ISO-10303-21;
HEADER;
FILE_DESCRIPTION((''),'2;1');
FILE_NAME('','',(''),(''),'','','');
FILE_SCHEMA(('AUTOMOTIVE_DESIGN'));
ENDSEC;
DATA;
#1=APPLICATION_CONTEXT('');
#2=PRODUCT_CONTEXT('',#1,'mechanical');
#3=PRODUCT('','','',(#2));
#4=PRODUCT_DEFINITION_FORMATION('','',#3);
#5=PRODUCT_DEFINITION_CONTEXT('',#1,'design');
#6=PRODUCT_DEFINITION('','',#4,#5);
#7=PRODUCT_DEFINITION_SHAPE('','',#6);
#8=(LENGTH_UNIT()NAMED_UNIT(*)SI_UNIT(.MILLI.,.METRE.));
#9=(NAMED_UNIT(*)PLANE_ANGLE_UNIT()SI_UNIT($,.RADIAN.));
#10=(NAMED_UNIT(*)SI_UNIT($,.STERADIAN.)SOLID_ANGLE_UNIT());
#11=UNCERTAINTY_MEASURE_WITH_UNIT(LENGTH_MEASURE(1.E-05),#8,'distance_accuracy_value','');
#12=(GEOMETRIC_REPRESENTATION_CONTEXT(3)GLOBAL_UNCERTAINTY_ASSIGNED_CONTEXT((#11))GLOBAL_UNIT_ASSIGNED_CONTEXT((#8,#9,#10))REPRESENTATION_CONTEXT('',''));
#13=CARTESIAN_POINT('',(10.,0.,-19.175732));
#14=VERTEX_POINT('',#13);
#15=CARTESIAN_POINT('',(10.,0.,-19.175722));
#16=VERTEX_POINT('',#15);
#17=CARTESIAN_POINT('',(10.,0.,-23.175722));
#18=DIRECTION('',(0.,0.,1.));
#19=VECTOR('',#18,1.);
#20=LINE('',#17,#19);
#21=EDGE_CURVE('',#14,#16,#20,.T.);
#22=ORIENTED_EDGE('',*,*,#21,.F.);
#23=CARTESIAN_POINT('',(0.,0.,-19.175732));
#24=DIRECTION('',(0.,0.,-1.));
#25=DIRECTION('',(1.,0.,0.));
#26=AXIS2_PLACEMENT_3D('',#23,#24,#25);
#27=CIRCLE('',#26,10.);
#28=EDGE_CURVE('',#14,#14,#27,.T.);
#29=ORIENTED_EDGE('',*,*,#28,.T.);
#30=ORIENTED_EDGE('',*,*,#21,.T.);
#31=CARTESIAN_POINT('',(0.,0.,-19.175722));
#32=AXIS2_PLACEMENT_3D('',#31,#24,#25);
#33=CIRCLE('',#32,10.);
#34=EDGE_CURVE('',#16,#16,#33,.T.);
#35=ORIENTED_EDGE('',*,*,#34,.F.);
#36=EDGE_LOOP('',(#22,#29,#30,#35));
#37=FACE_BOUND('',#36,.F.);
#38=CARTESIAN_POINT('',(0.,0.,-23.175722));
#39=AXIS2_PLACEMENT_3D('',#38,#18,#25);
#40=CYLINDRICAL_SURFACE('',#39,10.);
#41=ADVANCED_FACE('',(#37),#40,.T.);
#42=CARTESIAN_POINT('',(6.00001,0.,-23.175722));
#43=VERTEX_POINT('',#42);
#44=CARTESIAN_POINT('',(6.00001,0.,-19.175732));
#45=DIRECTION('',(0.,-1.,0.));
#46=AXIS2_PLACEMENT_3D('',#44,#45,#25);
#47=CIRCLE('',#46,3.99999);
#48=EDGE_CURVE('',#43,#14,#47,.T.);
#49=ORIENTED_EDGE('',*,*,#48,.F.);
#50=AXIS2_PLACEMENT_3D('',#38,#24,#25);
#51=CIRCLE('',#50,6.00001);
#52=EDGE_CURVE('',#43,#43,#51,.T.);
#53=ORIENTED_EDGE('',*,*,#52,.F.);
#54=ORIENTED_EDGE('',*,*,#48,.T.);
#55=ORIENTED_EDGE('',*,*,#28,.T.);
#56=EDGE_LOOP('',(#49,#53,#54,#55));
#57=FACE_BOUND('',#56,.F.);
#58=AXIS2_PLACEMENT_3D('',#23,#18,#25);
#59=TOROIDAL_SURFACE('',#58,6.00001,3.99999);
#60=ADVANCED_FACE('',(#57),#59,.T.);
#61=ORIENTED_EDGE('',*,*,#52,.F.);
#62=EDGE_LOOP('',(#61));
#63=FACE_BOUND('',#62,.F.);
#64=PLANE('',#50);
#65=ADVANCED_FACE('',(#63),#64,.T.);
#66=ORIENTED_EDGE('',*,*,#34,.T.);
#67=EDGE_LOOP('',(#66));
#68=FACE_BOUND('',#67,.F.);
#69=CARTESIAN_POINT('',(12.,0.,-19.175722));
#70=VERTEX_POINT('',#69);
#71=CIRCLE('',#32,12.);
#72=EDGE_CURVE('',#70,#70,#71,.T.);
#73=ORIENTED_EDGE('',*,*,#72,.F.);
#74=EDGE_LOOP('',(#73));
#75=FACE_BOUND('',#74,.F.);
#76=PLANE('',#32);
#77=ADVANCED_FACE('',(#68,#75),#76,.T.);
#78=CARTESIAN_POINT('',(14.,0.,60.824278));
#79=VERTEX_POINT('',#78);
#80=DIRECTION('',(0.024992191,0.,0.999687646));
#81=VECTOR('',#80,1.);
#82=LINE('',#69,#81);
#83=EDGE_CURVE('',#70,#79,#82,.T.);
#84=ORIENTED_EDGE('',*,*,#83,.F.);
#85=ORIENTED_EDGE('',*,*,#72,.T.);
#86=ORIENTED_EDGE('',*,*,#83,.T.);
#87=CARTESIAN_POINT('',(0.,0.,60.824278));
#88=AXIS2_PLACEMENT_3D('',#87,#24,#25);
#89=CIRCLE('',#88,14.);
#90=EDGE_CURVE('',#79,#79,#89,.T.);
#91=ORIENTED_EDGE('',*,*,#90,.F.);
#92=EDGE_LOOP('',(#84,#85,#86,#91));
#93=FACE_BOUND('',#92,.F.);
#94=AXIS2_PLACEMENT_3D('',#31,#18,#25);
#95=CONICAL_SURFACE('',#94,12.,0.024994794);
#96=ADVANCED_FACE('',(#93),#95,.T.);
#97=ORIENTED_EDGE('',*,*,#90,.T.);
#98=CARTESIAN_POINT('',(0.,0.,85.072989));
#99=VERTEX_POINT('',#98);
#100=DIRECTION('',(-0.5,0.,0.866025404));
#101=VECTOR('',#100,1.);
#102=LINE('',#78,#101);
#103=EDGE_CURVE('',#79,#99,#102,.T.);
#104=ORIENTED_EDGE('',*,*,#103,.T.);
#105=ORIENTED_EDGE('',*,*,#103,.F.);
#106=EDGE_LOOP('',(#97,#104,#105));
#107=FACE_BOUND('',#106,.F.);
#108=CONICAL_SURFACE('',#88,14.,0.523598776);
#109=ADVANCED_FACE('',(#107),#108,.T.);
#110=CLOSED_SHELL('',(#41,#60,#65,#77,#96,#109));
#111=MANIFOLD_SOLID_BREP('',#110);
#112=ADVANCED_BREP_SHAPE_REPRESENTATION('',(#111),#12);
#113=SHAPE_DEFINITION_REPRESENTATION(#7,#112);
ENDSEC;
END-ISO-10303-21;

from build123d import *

# Parameters (mm, degrees)
F2_R = 3.99999


# Not quite as in the source:
# - a fillet or chamfer is up to 0.001 mm smaller than in the source, because OpenCascade refuses the exact size


with BuildPart() as f1:
    # F0 (on Front) → F1 (revolve)
    with BuildSketch(Plane.XZ):
        Polygon((14, 60.8242780692), (0, 85.0729893751), (0, -23.1757219308), (10, -23.1757219308), (10, -19.1757219308), (12, -19.1757219308), align=None)
    revolve(axis=Axis((0, 0, 30.9486337222), (0, 0, -1)))

    # F2 (radius 4 in the source; OpenCascade refuses exactly that, so slightly less here)
    f2_edges = [f1.edges().sort_by_distance(p)[0] for p in [
        (-10, 0, -23.175722),
    ]]
    fillet(f2_edges, radius=F2_R)


solid = f1.part
